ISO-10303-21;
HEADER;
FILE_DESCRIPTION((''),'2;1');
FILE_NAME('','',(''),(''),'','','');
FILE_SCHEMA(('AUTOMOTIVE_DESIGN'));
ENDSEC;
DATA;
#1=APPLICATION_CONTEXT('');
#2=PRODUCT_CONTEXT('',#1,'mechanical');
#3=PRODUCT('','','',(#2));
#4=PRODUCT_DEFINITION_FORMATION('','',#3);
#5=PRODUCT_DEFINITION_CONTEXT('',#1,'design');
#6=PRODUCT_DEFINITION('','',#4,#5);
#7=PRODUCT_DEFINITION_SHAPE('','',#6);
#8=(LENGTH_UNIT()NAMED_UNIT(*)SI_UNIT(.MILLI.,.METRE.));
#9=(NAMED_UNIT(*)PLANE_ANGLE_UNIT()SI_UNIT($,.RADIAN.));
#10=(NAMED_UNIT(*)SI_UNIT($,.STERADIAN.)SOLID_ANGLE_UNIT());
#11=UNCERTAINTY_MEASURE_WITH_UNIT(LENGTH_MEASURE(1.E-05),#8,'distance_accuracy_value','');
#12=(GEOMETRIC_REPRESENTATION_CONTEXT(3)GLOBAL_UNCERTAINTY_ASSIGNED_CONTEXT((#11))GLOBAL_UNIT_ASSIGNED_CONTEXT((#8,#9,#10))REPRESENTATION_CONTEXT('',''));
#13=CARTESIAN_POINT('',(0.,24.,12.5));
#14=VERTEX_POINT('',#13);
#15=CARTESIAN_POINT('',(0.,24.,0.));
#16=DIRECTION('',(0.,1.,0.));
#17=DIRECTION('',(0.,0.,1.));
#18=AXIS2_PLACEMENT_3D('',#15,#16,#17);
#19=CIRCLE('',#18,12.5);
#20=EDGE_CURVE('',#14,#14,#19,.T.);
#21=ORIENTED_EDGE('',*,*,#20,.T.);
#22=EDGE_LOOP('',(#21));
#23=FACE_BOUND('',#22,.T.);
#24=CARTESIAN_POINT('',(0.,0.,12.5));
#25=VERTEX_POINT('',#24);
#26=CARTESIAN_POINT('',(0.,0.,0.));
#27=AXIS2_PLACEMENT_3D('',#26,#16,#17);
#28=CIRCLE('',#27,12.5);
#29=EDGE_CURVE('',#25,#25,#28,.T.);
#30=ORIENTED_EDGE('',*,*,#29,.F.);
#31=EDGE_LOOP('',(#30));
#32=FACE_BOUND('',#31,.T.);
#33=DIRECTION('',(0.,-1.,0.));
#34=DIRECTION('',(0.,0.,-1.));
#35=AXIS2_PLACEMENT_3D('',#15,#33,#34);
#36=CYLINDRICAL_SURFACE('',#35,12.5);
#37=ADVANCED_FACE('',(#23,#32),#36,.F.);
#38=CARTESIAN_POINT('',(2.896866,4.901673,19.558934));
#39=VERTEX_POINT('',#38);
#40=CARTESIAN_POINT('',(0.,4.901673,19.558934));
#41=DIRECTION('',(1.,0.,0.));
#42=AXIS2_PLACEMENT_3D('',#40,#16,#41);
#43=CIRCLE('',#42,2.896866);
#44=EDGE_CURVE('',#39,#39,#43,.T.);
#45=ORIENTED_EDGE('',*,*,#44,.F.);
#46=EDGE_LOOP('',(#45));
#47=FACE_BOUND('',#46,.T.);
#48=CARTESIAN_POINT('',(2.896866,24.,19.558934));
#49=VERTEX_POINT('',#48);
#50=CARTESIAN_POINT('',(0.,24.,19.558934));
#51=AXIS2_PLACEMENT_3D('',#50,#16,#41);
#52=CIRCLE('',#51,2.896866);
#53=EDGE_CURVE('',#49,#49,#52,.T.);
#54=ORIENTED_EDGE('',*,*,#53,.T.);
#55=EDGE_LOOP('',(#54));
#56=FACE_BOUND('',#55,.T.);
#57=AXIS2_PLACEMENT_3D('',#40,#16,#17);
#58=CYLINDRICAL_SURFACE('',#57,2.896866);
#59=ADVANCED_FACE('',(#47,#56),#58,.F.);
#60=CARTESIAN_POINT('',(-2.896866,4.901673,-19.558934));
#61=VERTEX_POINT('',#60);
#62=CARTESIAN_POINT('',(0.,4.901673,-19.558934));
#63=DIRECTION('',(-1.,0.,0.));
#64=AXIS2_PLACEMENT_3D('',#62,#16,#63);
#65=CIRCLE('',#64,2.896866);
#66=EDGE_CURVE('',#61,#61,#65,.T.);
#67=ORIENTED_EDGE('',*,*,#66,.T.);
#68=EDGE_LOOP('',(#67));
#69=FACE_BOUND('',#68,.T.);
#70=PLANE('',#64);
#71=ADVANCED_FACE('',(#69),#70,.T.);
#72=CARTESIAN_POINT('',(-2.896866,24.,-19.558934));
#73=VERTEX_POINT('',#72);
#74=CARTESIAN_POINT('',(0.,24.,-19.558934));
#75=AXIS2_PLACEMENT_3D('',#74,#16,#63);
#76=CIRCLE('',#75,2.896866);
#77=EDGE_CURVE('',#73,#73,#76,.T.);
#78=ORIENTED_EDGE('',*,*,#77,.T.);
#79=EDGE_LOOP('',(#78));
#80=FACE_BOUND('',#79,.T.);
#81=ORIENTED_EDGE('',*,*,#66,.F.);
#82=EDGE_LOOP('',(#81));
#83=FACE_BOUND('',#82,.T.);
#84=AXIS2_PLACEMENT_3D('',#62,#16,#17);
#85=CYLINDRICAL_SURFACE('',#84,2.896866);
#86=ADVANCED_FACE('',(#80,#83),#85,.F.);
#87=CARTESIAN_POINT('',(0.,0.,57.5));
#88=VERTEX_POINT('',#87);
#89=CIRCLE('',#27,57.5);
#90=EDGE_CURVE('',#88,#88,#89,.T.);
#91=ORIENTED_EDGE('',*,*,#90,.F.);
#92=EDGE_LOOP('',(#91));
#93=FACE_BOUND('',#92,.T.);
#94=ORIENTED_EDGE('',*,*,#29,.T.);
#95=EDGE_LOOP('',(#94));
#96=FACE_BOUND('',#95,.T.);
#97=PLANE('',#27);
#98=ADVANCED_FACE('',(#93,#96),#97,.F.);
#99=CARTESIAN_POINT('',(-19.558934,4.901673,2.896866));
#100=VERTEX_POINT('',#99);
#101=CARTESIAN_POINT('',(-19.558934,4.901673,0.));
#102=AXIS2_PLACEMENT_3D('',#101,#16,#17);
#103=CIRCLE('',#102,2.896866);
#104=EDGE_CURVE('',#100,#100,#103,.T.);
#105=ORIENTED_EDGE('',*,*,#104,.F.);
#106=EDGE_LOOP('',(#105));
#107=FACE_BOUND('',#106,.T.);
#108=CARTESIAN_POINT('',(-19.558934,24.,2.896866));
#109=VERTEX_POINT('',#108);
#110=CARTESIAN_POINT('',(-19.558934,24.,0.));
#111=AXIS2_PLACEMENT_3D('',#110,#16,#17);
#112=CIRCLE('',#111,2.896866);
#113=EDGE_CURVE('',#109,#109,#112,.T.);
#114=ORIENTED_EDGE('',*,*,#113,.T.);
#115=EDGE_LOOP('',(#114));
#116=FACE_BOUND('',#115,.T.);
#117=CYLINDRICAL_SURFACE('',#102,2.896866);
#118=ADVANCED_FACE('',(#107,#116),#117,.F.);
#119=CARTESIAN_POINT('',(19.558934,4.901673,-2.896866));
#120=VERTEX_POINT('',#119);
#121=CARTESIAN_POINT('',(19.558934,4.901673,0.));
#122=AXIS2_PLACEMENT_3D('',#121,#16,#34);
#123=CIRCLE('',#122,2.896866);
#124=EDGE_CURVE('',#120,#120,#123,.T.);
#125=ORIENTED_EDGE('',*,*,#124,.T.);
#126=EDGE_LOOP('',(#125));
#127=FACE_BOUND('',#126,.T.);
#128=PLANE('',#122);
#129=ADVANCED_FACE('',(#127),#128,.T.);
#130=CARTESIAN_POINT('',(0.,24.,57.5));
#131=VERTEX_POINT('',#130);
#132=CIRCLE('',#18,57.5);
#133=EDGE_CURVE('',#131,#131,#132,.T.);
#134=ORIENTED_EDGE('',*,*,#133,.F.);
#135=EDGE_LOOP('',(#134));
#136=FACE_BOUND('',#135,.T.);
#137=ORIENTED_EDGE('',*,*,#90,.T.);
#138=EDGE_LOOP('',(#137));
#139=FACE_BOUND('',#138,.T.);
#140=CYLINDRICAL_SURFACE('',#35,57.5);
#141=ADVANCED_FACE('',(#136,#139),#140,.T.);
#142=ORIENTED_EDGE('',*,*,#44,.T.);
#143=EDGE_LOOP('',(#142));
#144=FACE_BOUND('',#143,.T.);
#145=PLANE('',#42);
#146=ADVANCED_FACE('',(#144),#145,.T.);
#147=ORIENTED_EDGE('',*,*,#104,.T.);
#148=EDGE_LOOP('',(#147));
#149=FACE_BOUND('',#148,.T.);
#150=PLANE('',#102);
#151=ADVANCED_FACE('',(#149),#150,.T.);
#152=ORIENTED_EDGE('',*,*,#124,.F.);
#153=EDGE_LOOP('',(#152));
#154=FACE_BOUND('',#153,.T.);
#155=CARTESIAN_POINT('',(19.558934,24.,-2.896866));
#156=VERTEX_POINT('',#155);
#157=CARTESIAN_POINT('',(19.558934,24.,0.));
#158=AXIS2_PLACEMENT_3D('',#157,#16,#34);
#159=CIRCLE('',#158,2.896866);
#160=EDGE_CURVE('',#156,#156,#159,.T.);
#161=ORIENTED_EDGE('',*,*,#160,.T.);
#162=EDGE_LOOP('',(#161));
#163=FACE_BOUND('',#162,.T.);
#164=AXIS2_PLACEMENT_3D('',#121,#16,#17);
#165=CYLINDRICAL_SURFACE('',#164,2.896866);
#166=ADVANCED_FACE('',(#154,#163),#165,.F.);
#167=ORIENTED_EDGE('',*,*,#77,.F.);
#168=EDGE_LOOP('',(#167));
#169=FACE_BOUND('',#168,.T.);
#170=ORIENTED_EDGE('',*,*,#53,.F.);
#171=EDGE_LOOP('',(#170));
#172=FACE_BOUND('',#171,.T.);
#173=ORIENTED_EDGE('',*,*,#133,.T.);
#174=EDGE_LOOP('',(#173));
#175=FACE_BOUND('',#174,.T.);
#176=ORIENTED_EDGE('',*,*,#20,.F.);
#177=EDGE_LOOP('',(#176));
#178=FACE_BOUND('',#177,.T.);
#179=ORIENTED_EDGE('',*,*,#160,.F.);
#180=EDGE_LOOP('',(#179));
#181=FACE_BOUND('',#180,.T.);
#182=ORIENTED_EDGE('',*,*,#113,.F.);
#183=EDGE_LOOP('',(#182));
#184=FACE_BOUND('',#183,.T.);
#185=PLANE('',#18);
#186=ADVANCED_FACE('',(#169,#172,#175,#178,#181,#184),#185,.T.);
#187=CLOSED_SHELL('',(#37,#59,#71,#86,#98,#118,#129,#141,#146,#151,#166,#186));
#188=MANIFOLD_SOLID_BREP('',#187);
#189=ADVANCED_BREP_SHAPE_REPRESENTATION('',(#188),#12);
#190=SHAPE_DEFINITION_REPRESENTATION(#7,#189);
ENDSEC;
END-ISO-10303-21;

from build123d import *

# Parameters (mm, degrees)
SKETCH1_R           = 57.5
BOSS_EXTRUDE1_DEPTH = 24
SKETCH2_R           = 12.5
CUT_EXTRUDE1_DEPTH  = 85.785022262
SKETCH3_R           = 2.896866408
CUT_EXTRUDE2_DEPTH  = 19.098326655
CIRPATTERN1_COUNT   = 4


with BuildPart() as part:
    # Sketch1 → Boss-Extrude1 (new body)
    with BuildSketch(Plane(origin=(0, 0, 0), x_dir=(1, 0, 0), z_dir=(0, 1, 0))):
        Circle(SKETCH1_R)
    extrude(amount=BOSS_EXTRUDE1_DEPTH)

    # Sketch2 → Cut-Extrude1 (cut, through all)
    with BuildSketch(Plane(origin=(0, 0, 0), x_dir=(1, 0, 0), z_dir=(0, 1, 0))):
        Circle(SKETCH2_R)
    extrude(amount=CUT_EXTRUDE1_DEPTH, mode=Mode.SUBTRACT)

    # Sketch3 → Cut-Extrude2 (cut)
    with BuildSketch(Plane(origin=(0, 24, 0), x_dir=(1, 0, 0), z_dir=(0, 1, 0))):
        with Locations((-19.55893437, 0)):
            Circle(SKETCH3_R)
    cut_extrude2 = extrude(amount=-CUT_EXTRUDE2_DEPTH, mode=Mode.SUBTRACT)

    # CirPattern1: Cut-Extrude2 ×4 about axis
    cirpattern1_axis = Axis((0, 0, 0), (0, 1, 0))
    for i in range(1, CIRPATTERN1_COUNT):
        add(cut_extrude2.rotate(cirpattern1_axis, i * 360 / CIRPATTERN1_COUNT), mode=Mode.SUBTRACT)


solid = part.part
